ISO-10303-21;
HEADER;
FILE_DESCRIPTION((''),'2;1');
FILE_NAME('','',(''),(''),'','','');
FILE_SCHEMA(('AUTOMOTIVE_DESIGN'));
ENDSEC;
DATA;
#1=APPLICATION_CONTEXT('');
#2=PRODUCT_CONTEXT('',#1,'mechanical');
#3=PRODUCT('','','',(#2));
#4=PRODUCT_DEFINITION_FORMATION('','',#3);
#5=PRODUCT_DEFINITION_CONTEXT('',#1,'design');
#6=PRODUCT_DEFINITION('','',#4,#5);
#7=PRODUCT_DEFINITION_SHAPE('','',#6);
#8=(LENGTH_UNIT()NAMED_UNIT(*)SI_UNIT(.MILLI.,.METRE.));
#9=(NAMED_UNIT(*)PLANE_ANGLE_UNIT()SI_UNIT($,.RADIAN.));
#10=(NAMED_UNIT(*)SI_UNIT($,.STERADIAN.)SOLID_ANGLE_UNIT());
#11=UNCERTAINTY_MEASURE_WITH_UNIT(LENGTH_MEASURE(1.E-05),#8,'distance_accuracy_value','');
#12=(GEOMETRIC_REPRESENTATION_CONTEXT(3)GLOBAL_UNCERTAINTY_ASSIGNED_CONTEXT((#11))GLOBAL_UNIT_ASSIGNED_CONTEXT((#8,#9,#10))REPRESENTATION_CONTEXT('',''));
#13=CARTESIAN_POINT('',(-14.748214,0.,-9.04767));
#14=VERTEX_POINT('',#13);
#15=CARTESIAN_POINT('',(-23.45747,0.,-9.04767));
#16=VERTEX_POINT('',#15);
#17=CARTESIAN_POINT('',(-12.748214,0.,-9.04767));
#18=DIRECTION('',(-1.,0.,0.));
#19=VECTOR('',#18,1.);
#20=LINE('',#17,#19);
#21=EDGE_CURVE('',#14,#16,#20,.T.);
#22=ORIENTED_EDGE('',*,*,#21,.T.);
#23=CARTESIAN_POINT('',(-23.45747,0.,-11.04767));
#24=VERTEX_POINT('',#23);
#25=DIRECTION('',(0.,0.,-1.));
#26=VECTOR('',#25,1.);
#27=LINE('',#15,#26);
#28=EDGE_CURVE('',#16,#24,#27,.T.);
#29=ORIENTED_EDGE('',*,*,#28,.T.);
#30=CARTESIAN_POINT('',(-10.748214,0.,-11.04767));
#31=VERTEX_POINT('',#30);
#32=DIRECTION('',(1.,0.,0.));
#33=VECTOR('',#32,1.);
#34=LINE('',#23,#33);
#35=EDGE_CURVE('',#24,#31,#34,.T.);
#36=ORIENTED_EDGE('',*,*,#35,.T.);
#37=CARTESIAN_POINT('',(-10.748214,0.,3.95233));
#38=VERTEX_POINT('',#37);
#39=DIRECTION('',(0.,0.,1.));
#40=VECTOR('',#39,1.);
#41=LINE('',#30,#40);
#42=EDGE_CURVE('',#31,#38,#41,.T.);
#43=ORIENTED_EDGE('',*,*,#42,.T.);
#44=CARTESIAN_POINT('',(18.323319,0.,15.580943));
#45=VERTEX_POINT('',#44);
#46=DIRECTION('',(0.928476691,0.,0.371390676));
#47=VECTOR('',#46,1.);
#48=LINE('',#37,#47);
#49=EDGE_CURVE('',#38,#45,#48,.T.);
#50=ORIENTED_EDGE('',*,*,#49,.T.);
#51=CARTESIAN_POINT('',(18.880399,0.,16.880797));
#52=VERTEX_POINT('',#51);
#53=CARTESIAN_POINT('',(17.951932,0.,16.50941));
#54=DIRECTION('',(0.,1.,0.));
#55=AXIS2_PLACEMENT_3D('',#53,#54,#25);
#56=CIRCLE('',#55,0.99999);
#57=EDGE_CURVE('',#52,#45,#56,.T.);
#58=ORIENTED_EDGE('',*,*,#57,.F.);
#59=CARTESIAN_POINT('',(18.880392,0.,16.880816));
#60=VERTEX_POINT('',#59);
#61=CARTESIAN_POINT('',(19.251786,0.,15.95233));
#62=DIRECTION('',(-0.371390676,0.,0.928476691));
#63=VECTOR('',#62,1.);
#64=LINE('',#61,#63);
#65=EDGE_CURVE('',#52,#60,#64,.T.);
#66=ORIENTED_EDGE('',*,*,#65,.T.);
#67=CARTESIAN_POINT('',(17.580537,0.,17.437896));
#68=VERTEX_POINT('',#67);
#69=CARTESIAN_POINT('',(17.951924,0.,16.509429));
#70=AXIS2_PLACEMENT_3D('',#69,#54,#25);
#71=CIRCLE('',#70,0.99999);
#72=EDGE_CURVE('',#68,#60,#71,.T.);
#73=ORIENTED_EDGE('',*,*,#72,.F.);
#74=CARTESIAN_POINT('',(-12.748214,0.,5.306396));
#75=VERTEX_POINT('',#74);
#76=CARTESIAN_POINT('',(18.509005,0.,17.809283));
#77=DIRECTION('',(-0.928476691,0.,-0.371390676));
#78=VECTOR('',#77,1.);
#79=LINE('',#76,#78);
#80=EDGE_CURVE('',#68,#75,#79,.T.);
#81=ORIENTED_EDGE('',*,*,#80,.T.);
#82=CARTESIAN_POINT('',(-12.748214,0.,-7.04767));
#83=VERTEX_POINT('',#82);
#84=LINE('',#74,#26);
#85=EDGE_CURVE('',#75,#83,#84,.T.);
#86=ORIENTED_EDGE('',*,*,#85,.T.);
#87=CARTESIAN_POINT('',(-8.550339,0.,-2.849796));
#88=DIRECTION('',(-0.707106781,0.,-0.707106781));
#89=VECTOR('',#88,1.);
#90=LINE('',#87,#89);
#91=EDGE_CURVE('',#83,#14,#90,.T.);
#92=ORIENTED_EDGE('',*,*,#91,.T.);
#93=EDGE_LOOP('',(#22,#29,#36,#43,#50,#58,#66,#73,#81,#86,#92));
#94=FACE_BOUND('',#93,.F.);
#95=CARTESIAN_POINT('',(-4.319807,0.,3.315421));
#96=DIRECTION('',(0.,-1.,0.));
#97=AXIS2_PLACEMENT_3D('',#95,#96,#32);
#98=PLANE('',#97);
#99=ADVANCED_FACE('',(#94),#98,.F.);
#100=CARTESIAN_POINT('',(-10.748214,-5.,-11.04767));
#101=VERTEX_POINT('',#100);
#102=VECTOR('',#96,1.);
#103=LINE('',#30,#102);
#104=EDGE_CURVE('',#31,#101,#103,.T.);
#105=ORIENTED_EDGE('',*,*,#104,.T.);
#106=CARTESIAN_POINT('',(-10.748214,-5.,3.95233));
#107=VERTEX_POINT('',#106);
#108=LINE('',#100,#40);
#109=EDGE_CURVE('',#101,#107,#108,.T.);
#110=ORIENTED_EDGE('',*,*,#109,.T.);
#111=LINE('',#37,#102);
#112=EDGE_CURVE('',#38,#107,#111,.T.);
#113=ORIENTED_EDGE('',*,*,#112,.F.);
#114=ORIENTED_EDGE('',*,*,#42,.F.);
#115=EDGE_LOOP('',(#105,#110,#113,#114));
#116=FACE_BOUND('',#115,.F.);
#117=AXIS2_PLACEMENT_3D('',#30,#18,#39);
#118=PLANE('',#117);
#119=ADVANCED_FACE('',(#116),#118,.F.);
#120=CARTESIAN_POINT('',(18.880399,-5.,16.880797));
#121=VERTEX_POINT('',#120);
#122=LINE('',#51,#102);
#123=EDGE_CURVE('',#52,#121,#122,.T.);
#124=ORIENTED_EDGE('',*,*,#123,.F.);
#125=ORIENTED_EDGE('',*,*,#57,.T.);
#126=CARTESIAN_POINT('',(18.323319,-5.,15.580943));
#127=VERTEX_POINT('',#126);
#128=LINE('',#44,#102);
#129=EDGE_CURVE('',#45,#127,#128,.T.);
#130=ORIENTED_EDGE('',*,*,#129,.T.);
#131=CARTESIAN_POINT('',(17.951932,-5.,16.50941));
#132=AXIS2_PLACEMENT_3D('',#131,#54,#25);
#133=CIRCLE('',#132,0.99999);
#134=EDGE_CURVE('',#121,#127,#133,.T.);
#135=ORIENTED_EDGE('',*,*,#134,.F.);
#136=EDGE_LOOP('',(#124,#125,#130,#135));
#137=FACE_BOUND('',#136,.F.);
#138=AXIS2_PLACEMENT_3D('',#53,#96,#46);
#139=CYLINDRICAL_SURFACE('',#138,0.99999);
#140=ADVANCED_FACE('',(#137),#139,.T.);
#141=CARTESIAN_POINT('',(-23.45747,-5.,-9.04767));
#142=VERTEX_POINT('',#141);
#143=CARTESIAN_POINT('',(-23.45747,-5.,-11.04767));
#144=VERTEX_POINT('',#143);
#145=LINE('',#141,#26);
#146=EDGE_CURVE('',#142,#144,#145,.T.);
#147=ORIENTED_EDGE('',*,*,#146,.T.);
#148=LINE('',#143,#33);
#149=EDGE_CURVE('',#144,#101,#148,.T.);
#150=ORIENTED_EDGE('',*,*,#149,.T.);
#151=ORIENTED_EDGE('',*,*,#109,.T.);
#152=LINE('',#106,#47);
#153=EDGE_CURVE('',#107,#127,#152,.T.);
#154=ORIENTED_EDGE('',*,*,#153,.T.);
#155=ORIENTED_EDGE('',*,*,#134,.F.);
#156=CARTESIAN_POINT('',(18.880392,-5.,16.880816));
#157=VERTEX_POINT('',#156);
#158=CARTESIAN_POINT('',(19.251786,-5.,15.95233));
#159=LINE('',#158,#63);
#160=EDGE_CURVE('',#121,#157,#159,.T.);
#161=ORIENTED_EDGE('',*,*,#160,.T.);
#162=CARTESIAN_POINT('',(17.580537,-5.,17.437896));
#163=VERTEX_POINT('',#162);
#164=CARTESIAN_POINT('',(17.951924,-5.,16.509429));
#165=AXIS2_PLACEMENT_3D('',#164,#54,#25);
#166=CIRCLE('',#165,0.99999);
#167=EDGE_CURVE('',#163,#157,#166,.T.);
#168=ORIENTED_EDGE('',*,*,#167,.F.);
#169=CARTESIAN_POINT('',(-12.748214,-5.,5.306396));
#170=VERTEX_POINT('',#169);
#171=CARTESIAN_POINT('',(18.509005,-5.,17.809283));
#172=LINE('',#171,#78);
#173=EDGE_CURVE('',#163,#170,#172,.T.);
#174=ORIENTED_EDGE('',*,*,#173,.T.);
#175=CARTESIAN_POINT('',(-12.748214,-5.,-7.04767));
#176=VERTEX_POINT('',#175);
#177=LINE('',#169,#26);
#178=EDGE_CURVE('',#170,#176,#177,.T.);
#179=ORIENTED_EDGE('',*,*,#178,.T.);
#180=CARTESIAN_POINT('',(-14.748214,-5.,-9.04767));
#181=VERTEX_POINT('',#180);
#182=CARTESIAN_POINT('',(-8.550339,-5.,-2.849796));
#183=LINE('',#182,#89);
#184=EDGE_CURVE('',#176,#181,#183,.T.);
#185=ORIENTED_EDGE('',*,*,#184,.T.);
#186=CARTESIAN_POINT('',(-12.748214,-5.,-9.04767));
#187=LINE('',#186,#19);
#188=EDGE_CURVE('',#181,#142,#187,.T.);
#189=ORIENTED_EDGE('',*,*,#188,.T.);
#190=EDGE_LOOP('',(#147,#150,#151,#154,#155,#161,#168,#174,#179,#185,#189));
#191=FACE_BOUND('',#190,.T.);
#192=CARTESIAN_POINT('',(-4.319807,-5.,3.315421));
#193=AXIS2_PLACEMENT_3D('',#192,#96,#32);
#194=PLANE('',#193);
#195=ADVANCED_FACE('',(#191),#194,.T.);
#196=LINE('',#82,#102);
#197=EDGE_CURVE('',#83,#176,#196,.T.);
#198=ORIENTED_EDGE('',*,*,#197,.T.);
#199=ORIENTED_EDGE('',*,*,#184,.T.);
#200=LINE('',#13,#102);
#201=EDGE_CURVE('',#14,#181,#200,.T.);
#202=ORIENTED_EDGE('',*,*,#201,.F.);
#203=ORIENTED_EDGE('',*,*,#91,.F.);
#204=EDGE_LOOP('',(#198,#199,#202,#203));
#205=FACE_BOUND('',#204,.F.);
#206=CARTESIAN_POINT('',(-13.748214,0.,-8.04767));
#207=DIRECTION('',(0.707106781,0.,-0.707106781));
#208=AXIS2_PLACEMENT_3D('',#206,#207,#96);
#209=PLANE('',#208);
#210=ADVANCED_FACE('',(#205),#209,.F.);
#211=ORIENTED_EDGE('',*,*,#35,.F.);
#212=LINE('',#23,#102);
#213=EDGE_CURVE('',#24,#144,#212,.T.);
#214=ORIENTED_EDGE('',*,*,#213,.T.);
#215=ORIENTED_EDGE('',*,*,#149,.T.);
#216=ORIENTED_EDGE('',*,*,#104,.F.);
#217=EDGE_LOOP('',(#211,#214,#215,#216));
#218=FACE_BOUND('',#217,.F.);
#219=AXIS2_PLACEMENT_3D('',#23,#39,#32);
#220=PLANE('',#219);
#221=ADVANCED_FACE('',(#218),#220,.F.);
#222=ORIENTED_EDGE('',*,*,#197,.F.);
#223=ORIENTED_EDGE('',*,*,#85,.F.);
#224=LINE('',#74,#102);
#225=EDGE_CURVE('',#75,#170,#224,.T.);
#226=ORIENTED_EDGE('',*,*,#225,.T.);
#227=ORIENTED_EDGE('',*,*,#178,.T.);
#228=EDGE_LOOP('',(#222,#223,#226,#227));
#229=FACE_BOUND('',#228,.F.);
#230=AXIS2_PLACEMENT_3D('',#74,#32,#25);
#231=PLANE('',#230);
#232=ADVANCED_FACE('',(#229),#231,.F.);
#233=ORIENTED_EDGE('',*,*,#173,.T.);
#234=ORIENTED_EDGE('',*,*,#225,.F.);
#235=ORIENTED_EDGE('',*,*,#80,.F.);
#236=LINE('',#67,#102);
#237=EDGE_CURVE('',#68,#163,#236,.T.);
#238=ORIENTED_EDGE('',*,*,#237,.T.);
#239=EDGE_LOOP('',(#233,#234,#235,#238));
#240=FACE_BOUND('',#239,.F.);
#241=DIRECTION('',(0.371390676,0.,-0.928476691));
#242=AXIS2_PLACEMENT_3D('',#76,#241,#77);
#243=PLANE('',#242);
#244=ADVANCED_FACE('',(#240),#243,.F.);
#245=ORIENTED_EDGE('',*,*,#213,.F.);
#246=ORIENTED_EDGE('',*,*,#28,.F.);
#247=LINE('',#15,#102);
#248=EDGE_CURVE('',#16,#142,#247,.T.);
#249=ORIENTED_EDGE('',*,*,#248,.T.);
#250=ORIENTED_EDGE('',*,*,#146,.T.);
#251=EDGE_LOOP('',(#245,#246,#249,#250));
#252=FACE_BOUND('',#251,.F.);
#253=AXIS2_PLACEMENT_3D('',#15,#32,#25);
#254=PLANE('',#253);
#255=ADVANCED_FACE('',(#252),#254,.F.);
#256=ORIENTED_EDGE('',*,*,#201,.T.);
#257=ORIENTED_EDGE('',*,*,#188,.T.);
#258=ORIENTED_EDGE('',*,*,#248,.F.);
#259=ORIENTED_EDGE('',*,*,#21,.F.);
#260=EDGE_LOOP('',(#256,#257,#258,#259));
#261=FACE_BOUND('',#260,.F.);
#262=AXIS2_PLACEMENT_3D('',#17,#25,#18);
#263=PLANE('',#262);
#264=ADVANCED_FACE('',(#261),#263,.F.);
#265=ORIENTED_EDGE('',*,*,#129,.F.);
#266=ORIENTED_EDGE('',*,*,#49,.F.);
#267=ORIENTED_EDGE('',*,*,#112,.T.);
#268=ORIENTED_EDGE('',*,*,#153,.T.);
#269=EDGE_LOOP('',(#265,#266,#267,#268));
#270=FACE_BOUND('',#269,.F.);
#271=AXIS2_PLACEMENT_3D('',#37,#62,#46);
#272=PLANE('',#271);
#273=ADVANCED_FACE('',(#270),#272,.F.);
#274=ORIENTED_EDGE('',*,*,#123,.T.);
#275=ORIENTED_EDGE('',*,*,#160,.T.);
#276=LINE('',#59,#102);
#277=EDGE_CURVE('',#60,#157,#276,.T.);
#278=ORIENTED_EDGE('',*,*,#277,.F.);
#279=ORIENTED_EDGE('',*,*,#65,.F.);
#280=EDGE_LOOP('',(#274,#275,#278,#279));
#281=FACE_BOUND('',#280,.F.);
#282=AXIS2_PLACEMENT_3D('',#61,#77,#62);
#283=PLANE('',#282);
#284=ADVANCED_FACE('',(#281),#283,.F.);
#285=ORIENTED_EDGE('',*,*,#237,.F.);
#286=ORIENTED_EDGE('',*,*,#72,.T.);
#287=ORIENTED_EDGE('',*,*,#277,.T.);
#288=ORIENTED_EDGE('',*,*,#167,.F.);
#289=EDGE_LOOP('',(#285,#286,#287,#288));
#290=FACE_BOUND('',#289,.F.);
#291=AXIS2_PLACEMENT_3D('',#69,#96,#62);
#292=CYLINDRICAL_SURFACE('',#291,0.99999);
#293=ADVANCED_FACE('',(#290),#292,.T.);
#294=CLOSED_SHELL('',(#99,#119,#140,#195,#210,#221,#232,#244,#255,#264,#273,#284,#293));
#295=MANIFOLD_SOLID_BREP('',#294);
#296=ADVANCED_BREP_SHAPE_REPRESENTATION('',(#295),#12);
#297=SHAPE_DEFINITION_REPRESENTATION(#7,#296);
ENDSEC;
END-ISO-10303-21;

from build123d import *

# Parameters (mm, degrees)
F1_DEPTH = 5
F2_SIZE  = 2
F3_R     = 0.99999


# Not quite as in the source:
# - a fillet or chamfer is up to 0.001 mm smaller than in the source, because OpenCascade refuses the exact size


with BuildPart() as f1:
    # F0 (on Front) → F1 (new body)
    with BuildSketch(Plane.XZ):
        Polygon((-10.7482137709, -11.0476701237), (-10.7482137709, 3.9523298763), (19.2517862291, 15.9523298763), (18.5090048764, 17.8092832581), (-12.7482137709, 5.3063957992), (-12.7482137709, -9.0476701237), (-23.457470371, -9.0476701237), (-23.457470371, -11.0476701237), align=None)
    extrude(amount=F1_DEPTH)

    # F2
    f2_edges = [f1.edges().sort_by_distance(p)[0] for p in [
        (-12.748214, -2.5, -9.04767),
    ]]
    chamfer(f2_edges, length=F2_SIZE)

    # F3 (radius 1 in the source; OpenCascade refuses exactly that, so slightly less here)
    f3_edges = [f1.edges().sort_by_distance(p)[0] for p in [
        (18.509005, -2.5, 17.809283),
        (19.251786, -2.5, 15.95233),
    ]]
    fillet(f3_edges, radius=F3_R)


solid = f1.part
